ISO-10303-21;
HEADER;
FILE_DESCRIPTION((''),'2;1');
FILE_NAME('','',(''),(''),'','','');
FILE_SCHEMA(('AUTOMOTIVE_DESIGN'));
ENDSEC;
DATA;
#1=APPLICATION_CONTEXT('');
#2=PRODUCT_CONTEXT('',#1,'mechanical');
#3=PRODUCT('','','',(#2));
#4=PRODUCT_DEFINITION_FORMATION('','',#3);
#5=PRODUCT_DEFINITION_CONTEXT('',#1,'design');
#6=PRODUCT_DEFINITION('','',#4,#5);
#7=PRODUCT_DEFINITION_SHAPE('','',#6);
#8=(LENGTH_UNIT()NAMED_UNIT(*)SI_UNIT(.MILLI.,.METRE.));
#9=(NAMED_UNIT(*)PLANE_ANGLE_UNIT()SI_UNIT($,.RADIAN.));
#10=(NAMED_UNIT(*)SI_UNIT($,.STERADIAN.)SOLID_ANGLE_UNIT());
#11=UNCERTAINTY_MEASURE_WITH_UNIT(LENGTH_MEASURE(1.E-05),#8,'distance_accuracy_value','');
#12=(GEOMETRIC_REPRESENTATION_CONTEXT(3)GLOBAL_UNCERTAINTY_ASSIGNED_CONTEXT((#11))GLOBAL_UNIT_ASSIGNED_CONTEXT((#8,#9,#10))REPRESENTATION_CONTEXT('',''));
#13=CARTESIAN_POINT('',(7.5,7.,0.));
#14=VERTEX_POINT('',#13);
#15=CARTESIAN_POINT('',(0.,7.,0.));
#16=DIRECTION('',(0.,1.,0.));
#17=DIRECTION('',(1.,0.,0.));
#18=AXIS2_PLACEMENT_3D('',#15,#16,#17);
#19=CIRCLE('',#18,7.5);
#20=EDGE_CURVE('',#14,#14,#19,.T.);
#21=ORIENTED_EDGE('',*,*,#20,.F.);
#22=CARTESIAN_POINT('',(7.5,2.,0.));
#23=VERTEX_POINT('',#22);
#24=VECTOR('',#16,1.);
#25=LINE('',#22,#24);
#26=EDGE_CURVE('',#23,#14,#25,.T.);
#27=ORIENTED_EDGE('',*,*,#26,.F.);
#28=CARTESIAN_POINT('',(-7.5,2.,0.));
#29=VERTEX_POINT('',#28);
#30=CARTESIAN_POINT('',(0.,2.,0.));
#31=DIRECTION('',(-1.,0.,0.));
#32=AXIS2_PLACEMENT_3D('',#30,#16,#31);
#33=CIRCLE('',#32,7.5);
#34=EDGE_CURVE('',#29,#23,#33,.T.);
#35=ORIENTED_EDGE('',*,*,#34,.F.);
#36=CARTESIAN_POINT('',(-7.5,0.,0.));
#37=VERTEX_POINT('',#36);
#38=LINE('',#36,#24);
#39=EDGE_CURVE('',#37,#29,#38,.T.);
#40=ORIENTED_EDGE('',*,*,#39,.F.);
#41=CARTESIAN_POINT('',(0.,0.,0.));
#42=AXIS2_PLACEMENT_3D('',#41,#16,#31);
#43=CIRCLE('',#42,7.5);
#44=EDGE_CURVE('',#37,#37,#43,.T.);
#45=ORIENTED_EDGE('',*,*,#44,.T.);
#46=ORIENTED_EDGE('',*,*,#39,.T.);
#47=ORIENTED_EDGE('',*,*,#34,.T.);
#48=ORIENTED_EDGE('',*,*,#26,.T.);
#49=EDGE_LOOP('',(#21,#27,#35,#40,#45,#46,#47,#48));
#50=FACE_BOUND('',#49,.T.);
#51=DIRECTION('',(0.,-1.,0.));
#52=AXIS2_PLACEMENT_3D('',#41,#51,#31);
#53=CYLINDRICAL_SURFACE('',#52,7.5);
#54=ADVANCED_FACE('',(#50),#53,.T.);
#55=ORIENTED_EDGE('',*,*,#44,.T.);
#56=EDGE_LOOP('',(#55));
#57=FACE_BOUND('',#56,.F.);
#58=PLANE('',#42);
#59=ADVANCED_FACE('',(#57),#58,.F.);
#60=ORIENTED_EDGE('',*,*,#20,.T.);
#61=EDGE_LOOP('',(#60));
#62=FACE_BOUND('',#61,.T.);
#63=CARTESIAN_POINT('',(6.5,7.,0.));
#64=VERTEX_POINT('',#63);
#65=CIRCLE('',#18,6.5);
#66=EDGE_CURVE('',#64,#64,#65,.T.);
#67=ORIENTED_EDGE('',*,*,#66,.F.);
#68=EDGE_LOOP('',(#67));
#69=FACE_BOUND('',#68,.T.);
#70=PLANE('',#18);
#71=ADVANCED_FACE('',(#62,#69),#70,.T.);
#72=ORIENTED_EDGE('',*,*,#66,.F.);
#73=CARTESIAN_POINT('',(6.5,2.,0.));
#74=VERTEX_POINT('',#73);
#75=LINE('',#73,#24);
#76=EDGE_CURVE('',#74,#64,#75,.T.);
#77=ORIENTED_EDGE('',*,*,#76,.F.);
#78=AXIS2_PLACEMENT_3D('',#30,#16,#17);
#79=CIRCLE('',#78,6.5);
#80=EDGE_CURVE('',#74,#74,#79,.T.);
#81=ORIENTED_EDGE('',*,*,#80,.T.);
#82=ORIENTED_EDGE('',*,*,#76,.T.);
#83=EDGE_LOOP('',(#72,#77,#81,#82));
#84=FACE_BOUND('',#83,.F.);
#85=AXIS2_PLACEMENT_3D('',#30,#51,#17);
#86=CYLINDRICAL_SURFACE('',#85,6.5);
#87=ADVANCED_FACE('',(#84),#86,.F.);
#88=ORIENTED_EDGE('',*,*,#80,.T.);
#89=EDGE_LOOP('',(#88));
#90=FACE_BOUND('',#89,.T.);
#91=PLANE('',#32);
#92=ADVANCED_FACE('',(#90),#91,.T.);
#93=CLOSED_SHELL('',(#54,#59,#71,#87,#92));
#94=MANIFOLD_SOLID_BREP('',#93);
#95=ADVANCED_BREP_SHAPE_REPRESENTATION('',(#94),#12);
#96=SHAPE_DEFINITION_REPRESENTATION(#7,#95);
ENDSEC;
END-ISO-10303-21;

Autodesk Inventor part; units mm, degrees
ref_plane "YZ Plane" through (0, 0, 0) normal (1, 0, 0) x (0, 1, 0)
ref_plane "XZ Plane" through (0, 0, 0) normal (0, 1, 0) x (-1, 0, 0)
ref_plane "XY Plane" through (0, 0, 0) normal (0, 0, 1) x (1, 0, 0)
sketch "草圖1" plane through (0, 0, 0) normal (0, 1, 0) x (-1, 0, 0)
  circle A0 centre (0, 0) radius 7.5
  dimension "d0" = 15
extrude "擠出1" add sketch "草圖1" along normal blind 2
sketch "草圖2" plane through (0, 2, 0) normal (0, 1, 0) x (1, 0, 0)
  circle A0 centre (0, 0) radius 6.5
  circle A1 centre (0, 0) radius 7.5
  dimension "d3" = 13
extrude "擠出2" add sketch "草圖2" along normal blind 5
properties part number "肋_圓"
